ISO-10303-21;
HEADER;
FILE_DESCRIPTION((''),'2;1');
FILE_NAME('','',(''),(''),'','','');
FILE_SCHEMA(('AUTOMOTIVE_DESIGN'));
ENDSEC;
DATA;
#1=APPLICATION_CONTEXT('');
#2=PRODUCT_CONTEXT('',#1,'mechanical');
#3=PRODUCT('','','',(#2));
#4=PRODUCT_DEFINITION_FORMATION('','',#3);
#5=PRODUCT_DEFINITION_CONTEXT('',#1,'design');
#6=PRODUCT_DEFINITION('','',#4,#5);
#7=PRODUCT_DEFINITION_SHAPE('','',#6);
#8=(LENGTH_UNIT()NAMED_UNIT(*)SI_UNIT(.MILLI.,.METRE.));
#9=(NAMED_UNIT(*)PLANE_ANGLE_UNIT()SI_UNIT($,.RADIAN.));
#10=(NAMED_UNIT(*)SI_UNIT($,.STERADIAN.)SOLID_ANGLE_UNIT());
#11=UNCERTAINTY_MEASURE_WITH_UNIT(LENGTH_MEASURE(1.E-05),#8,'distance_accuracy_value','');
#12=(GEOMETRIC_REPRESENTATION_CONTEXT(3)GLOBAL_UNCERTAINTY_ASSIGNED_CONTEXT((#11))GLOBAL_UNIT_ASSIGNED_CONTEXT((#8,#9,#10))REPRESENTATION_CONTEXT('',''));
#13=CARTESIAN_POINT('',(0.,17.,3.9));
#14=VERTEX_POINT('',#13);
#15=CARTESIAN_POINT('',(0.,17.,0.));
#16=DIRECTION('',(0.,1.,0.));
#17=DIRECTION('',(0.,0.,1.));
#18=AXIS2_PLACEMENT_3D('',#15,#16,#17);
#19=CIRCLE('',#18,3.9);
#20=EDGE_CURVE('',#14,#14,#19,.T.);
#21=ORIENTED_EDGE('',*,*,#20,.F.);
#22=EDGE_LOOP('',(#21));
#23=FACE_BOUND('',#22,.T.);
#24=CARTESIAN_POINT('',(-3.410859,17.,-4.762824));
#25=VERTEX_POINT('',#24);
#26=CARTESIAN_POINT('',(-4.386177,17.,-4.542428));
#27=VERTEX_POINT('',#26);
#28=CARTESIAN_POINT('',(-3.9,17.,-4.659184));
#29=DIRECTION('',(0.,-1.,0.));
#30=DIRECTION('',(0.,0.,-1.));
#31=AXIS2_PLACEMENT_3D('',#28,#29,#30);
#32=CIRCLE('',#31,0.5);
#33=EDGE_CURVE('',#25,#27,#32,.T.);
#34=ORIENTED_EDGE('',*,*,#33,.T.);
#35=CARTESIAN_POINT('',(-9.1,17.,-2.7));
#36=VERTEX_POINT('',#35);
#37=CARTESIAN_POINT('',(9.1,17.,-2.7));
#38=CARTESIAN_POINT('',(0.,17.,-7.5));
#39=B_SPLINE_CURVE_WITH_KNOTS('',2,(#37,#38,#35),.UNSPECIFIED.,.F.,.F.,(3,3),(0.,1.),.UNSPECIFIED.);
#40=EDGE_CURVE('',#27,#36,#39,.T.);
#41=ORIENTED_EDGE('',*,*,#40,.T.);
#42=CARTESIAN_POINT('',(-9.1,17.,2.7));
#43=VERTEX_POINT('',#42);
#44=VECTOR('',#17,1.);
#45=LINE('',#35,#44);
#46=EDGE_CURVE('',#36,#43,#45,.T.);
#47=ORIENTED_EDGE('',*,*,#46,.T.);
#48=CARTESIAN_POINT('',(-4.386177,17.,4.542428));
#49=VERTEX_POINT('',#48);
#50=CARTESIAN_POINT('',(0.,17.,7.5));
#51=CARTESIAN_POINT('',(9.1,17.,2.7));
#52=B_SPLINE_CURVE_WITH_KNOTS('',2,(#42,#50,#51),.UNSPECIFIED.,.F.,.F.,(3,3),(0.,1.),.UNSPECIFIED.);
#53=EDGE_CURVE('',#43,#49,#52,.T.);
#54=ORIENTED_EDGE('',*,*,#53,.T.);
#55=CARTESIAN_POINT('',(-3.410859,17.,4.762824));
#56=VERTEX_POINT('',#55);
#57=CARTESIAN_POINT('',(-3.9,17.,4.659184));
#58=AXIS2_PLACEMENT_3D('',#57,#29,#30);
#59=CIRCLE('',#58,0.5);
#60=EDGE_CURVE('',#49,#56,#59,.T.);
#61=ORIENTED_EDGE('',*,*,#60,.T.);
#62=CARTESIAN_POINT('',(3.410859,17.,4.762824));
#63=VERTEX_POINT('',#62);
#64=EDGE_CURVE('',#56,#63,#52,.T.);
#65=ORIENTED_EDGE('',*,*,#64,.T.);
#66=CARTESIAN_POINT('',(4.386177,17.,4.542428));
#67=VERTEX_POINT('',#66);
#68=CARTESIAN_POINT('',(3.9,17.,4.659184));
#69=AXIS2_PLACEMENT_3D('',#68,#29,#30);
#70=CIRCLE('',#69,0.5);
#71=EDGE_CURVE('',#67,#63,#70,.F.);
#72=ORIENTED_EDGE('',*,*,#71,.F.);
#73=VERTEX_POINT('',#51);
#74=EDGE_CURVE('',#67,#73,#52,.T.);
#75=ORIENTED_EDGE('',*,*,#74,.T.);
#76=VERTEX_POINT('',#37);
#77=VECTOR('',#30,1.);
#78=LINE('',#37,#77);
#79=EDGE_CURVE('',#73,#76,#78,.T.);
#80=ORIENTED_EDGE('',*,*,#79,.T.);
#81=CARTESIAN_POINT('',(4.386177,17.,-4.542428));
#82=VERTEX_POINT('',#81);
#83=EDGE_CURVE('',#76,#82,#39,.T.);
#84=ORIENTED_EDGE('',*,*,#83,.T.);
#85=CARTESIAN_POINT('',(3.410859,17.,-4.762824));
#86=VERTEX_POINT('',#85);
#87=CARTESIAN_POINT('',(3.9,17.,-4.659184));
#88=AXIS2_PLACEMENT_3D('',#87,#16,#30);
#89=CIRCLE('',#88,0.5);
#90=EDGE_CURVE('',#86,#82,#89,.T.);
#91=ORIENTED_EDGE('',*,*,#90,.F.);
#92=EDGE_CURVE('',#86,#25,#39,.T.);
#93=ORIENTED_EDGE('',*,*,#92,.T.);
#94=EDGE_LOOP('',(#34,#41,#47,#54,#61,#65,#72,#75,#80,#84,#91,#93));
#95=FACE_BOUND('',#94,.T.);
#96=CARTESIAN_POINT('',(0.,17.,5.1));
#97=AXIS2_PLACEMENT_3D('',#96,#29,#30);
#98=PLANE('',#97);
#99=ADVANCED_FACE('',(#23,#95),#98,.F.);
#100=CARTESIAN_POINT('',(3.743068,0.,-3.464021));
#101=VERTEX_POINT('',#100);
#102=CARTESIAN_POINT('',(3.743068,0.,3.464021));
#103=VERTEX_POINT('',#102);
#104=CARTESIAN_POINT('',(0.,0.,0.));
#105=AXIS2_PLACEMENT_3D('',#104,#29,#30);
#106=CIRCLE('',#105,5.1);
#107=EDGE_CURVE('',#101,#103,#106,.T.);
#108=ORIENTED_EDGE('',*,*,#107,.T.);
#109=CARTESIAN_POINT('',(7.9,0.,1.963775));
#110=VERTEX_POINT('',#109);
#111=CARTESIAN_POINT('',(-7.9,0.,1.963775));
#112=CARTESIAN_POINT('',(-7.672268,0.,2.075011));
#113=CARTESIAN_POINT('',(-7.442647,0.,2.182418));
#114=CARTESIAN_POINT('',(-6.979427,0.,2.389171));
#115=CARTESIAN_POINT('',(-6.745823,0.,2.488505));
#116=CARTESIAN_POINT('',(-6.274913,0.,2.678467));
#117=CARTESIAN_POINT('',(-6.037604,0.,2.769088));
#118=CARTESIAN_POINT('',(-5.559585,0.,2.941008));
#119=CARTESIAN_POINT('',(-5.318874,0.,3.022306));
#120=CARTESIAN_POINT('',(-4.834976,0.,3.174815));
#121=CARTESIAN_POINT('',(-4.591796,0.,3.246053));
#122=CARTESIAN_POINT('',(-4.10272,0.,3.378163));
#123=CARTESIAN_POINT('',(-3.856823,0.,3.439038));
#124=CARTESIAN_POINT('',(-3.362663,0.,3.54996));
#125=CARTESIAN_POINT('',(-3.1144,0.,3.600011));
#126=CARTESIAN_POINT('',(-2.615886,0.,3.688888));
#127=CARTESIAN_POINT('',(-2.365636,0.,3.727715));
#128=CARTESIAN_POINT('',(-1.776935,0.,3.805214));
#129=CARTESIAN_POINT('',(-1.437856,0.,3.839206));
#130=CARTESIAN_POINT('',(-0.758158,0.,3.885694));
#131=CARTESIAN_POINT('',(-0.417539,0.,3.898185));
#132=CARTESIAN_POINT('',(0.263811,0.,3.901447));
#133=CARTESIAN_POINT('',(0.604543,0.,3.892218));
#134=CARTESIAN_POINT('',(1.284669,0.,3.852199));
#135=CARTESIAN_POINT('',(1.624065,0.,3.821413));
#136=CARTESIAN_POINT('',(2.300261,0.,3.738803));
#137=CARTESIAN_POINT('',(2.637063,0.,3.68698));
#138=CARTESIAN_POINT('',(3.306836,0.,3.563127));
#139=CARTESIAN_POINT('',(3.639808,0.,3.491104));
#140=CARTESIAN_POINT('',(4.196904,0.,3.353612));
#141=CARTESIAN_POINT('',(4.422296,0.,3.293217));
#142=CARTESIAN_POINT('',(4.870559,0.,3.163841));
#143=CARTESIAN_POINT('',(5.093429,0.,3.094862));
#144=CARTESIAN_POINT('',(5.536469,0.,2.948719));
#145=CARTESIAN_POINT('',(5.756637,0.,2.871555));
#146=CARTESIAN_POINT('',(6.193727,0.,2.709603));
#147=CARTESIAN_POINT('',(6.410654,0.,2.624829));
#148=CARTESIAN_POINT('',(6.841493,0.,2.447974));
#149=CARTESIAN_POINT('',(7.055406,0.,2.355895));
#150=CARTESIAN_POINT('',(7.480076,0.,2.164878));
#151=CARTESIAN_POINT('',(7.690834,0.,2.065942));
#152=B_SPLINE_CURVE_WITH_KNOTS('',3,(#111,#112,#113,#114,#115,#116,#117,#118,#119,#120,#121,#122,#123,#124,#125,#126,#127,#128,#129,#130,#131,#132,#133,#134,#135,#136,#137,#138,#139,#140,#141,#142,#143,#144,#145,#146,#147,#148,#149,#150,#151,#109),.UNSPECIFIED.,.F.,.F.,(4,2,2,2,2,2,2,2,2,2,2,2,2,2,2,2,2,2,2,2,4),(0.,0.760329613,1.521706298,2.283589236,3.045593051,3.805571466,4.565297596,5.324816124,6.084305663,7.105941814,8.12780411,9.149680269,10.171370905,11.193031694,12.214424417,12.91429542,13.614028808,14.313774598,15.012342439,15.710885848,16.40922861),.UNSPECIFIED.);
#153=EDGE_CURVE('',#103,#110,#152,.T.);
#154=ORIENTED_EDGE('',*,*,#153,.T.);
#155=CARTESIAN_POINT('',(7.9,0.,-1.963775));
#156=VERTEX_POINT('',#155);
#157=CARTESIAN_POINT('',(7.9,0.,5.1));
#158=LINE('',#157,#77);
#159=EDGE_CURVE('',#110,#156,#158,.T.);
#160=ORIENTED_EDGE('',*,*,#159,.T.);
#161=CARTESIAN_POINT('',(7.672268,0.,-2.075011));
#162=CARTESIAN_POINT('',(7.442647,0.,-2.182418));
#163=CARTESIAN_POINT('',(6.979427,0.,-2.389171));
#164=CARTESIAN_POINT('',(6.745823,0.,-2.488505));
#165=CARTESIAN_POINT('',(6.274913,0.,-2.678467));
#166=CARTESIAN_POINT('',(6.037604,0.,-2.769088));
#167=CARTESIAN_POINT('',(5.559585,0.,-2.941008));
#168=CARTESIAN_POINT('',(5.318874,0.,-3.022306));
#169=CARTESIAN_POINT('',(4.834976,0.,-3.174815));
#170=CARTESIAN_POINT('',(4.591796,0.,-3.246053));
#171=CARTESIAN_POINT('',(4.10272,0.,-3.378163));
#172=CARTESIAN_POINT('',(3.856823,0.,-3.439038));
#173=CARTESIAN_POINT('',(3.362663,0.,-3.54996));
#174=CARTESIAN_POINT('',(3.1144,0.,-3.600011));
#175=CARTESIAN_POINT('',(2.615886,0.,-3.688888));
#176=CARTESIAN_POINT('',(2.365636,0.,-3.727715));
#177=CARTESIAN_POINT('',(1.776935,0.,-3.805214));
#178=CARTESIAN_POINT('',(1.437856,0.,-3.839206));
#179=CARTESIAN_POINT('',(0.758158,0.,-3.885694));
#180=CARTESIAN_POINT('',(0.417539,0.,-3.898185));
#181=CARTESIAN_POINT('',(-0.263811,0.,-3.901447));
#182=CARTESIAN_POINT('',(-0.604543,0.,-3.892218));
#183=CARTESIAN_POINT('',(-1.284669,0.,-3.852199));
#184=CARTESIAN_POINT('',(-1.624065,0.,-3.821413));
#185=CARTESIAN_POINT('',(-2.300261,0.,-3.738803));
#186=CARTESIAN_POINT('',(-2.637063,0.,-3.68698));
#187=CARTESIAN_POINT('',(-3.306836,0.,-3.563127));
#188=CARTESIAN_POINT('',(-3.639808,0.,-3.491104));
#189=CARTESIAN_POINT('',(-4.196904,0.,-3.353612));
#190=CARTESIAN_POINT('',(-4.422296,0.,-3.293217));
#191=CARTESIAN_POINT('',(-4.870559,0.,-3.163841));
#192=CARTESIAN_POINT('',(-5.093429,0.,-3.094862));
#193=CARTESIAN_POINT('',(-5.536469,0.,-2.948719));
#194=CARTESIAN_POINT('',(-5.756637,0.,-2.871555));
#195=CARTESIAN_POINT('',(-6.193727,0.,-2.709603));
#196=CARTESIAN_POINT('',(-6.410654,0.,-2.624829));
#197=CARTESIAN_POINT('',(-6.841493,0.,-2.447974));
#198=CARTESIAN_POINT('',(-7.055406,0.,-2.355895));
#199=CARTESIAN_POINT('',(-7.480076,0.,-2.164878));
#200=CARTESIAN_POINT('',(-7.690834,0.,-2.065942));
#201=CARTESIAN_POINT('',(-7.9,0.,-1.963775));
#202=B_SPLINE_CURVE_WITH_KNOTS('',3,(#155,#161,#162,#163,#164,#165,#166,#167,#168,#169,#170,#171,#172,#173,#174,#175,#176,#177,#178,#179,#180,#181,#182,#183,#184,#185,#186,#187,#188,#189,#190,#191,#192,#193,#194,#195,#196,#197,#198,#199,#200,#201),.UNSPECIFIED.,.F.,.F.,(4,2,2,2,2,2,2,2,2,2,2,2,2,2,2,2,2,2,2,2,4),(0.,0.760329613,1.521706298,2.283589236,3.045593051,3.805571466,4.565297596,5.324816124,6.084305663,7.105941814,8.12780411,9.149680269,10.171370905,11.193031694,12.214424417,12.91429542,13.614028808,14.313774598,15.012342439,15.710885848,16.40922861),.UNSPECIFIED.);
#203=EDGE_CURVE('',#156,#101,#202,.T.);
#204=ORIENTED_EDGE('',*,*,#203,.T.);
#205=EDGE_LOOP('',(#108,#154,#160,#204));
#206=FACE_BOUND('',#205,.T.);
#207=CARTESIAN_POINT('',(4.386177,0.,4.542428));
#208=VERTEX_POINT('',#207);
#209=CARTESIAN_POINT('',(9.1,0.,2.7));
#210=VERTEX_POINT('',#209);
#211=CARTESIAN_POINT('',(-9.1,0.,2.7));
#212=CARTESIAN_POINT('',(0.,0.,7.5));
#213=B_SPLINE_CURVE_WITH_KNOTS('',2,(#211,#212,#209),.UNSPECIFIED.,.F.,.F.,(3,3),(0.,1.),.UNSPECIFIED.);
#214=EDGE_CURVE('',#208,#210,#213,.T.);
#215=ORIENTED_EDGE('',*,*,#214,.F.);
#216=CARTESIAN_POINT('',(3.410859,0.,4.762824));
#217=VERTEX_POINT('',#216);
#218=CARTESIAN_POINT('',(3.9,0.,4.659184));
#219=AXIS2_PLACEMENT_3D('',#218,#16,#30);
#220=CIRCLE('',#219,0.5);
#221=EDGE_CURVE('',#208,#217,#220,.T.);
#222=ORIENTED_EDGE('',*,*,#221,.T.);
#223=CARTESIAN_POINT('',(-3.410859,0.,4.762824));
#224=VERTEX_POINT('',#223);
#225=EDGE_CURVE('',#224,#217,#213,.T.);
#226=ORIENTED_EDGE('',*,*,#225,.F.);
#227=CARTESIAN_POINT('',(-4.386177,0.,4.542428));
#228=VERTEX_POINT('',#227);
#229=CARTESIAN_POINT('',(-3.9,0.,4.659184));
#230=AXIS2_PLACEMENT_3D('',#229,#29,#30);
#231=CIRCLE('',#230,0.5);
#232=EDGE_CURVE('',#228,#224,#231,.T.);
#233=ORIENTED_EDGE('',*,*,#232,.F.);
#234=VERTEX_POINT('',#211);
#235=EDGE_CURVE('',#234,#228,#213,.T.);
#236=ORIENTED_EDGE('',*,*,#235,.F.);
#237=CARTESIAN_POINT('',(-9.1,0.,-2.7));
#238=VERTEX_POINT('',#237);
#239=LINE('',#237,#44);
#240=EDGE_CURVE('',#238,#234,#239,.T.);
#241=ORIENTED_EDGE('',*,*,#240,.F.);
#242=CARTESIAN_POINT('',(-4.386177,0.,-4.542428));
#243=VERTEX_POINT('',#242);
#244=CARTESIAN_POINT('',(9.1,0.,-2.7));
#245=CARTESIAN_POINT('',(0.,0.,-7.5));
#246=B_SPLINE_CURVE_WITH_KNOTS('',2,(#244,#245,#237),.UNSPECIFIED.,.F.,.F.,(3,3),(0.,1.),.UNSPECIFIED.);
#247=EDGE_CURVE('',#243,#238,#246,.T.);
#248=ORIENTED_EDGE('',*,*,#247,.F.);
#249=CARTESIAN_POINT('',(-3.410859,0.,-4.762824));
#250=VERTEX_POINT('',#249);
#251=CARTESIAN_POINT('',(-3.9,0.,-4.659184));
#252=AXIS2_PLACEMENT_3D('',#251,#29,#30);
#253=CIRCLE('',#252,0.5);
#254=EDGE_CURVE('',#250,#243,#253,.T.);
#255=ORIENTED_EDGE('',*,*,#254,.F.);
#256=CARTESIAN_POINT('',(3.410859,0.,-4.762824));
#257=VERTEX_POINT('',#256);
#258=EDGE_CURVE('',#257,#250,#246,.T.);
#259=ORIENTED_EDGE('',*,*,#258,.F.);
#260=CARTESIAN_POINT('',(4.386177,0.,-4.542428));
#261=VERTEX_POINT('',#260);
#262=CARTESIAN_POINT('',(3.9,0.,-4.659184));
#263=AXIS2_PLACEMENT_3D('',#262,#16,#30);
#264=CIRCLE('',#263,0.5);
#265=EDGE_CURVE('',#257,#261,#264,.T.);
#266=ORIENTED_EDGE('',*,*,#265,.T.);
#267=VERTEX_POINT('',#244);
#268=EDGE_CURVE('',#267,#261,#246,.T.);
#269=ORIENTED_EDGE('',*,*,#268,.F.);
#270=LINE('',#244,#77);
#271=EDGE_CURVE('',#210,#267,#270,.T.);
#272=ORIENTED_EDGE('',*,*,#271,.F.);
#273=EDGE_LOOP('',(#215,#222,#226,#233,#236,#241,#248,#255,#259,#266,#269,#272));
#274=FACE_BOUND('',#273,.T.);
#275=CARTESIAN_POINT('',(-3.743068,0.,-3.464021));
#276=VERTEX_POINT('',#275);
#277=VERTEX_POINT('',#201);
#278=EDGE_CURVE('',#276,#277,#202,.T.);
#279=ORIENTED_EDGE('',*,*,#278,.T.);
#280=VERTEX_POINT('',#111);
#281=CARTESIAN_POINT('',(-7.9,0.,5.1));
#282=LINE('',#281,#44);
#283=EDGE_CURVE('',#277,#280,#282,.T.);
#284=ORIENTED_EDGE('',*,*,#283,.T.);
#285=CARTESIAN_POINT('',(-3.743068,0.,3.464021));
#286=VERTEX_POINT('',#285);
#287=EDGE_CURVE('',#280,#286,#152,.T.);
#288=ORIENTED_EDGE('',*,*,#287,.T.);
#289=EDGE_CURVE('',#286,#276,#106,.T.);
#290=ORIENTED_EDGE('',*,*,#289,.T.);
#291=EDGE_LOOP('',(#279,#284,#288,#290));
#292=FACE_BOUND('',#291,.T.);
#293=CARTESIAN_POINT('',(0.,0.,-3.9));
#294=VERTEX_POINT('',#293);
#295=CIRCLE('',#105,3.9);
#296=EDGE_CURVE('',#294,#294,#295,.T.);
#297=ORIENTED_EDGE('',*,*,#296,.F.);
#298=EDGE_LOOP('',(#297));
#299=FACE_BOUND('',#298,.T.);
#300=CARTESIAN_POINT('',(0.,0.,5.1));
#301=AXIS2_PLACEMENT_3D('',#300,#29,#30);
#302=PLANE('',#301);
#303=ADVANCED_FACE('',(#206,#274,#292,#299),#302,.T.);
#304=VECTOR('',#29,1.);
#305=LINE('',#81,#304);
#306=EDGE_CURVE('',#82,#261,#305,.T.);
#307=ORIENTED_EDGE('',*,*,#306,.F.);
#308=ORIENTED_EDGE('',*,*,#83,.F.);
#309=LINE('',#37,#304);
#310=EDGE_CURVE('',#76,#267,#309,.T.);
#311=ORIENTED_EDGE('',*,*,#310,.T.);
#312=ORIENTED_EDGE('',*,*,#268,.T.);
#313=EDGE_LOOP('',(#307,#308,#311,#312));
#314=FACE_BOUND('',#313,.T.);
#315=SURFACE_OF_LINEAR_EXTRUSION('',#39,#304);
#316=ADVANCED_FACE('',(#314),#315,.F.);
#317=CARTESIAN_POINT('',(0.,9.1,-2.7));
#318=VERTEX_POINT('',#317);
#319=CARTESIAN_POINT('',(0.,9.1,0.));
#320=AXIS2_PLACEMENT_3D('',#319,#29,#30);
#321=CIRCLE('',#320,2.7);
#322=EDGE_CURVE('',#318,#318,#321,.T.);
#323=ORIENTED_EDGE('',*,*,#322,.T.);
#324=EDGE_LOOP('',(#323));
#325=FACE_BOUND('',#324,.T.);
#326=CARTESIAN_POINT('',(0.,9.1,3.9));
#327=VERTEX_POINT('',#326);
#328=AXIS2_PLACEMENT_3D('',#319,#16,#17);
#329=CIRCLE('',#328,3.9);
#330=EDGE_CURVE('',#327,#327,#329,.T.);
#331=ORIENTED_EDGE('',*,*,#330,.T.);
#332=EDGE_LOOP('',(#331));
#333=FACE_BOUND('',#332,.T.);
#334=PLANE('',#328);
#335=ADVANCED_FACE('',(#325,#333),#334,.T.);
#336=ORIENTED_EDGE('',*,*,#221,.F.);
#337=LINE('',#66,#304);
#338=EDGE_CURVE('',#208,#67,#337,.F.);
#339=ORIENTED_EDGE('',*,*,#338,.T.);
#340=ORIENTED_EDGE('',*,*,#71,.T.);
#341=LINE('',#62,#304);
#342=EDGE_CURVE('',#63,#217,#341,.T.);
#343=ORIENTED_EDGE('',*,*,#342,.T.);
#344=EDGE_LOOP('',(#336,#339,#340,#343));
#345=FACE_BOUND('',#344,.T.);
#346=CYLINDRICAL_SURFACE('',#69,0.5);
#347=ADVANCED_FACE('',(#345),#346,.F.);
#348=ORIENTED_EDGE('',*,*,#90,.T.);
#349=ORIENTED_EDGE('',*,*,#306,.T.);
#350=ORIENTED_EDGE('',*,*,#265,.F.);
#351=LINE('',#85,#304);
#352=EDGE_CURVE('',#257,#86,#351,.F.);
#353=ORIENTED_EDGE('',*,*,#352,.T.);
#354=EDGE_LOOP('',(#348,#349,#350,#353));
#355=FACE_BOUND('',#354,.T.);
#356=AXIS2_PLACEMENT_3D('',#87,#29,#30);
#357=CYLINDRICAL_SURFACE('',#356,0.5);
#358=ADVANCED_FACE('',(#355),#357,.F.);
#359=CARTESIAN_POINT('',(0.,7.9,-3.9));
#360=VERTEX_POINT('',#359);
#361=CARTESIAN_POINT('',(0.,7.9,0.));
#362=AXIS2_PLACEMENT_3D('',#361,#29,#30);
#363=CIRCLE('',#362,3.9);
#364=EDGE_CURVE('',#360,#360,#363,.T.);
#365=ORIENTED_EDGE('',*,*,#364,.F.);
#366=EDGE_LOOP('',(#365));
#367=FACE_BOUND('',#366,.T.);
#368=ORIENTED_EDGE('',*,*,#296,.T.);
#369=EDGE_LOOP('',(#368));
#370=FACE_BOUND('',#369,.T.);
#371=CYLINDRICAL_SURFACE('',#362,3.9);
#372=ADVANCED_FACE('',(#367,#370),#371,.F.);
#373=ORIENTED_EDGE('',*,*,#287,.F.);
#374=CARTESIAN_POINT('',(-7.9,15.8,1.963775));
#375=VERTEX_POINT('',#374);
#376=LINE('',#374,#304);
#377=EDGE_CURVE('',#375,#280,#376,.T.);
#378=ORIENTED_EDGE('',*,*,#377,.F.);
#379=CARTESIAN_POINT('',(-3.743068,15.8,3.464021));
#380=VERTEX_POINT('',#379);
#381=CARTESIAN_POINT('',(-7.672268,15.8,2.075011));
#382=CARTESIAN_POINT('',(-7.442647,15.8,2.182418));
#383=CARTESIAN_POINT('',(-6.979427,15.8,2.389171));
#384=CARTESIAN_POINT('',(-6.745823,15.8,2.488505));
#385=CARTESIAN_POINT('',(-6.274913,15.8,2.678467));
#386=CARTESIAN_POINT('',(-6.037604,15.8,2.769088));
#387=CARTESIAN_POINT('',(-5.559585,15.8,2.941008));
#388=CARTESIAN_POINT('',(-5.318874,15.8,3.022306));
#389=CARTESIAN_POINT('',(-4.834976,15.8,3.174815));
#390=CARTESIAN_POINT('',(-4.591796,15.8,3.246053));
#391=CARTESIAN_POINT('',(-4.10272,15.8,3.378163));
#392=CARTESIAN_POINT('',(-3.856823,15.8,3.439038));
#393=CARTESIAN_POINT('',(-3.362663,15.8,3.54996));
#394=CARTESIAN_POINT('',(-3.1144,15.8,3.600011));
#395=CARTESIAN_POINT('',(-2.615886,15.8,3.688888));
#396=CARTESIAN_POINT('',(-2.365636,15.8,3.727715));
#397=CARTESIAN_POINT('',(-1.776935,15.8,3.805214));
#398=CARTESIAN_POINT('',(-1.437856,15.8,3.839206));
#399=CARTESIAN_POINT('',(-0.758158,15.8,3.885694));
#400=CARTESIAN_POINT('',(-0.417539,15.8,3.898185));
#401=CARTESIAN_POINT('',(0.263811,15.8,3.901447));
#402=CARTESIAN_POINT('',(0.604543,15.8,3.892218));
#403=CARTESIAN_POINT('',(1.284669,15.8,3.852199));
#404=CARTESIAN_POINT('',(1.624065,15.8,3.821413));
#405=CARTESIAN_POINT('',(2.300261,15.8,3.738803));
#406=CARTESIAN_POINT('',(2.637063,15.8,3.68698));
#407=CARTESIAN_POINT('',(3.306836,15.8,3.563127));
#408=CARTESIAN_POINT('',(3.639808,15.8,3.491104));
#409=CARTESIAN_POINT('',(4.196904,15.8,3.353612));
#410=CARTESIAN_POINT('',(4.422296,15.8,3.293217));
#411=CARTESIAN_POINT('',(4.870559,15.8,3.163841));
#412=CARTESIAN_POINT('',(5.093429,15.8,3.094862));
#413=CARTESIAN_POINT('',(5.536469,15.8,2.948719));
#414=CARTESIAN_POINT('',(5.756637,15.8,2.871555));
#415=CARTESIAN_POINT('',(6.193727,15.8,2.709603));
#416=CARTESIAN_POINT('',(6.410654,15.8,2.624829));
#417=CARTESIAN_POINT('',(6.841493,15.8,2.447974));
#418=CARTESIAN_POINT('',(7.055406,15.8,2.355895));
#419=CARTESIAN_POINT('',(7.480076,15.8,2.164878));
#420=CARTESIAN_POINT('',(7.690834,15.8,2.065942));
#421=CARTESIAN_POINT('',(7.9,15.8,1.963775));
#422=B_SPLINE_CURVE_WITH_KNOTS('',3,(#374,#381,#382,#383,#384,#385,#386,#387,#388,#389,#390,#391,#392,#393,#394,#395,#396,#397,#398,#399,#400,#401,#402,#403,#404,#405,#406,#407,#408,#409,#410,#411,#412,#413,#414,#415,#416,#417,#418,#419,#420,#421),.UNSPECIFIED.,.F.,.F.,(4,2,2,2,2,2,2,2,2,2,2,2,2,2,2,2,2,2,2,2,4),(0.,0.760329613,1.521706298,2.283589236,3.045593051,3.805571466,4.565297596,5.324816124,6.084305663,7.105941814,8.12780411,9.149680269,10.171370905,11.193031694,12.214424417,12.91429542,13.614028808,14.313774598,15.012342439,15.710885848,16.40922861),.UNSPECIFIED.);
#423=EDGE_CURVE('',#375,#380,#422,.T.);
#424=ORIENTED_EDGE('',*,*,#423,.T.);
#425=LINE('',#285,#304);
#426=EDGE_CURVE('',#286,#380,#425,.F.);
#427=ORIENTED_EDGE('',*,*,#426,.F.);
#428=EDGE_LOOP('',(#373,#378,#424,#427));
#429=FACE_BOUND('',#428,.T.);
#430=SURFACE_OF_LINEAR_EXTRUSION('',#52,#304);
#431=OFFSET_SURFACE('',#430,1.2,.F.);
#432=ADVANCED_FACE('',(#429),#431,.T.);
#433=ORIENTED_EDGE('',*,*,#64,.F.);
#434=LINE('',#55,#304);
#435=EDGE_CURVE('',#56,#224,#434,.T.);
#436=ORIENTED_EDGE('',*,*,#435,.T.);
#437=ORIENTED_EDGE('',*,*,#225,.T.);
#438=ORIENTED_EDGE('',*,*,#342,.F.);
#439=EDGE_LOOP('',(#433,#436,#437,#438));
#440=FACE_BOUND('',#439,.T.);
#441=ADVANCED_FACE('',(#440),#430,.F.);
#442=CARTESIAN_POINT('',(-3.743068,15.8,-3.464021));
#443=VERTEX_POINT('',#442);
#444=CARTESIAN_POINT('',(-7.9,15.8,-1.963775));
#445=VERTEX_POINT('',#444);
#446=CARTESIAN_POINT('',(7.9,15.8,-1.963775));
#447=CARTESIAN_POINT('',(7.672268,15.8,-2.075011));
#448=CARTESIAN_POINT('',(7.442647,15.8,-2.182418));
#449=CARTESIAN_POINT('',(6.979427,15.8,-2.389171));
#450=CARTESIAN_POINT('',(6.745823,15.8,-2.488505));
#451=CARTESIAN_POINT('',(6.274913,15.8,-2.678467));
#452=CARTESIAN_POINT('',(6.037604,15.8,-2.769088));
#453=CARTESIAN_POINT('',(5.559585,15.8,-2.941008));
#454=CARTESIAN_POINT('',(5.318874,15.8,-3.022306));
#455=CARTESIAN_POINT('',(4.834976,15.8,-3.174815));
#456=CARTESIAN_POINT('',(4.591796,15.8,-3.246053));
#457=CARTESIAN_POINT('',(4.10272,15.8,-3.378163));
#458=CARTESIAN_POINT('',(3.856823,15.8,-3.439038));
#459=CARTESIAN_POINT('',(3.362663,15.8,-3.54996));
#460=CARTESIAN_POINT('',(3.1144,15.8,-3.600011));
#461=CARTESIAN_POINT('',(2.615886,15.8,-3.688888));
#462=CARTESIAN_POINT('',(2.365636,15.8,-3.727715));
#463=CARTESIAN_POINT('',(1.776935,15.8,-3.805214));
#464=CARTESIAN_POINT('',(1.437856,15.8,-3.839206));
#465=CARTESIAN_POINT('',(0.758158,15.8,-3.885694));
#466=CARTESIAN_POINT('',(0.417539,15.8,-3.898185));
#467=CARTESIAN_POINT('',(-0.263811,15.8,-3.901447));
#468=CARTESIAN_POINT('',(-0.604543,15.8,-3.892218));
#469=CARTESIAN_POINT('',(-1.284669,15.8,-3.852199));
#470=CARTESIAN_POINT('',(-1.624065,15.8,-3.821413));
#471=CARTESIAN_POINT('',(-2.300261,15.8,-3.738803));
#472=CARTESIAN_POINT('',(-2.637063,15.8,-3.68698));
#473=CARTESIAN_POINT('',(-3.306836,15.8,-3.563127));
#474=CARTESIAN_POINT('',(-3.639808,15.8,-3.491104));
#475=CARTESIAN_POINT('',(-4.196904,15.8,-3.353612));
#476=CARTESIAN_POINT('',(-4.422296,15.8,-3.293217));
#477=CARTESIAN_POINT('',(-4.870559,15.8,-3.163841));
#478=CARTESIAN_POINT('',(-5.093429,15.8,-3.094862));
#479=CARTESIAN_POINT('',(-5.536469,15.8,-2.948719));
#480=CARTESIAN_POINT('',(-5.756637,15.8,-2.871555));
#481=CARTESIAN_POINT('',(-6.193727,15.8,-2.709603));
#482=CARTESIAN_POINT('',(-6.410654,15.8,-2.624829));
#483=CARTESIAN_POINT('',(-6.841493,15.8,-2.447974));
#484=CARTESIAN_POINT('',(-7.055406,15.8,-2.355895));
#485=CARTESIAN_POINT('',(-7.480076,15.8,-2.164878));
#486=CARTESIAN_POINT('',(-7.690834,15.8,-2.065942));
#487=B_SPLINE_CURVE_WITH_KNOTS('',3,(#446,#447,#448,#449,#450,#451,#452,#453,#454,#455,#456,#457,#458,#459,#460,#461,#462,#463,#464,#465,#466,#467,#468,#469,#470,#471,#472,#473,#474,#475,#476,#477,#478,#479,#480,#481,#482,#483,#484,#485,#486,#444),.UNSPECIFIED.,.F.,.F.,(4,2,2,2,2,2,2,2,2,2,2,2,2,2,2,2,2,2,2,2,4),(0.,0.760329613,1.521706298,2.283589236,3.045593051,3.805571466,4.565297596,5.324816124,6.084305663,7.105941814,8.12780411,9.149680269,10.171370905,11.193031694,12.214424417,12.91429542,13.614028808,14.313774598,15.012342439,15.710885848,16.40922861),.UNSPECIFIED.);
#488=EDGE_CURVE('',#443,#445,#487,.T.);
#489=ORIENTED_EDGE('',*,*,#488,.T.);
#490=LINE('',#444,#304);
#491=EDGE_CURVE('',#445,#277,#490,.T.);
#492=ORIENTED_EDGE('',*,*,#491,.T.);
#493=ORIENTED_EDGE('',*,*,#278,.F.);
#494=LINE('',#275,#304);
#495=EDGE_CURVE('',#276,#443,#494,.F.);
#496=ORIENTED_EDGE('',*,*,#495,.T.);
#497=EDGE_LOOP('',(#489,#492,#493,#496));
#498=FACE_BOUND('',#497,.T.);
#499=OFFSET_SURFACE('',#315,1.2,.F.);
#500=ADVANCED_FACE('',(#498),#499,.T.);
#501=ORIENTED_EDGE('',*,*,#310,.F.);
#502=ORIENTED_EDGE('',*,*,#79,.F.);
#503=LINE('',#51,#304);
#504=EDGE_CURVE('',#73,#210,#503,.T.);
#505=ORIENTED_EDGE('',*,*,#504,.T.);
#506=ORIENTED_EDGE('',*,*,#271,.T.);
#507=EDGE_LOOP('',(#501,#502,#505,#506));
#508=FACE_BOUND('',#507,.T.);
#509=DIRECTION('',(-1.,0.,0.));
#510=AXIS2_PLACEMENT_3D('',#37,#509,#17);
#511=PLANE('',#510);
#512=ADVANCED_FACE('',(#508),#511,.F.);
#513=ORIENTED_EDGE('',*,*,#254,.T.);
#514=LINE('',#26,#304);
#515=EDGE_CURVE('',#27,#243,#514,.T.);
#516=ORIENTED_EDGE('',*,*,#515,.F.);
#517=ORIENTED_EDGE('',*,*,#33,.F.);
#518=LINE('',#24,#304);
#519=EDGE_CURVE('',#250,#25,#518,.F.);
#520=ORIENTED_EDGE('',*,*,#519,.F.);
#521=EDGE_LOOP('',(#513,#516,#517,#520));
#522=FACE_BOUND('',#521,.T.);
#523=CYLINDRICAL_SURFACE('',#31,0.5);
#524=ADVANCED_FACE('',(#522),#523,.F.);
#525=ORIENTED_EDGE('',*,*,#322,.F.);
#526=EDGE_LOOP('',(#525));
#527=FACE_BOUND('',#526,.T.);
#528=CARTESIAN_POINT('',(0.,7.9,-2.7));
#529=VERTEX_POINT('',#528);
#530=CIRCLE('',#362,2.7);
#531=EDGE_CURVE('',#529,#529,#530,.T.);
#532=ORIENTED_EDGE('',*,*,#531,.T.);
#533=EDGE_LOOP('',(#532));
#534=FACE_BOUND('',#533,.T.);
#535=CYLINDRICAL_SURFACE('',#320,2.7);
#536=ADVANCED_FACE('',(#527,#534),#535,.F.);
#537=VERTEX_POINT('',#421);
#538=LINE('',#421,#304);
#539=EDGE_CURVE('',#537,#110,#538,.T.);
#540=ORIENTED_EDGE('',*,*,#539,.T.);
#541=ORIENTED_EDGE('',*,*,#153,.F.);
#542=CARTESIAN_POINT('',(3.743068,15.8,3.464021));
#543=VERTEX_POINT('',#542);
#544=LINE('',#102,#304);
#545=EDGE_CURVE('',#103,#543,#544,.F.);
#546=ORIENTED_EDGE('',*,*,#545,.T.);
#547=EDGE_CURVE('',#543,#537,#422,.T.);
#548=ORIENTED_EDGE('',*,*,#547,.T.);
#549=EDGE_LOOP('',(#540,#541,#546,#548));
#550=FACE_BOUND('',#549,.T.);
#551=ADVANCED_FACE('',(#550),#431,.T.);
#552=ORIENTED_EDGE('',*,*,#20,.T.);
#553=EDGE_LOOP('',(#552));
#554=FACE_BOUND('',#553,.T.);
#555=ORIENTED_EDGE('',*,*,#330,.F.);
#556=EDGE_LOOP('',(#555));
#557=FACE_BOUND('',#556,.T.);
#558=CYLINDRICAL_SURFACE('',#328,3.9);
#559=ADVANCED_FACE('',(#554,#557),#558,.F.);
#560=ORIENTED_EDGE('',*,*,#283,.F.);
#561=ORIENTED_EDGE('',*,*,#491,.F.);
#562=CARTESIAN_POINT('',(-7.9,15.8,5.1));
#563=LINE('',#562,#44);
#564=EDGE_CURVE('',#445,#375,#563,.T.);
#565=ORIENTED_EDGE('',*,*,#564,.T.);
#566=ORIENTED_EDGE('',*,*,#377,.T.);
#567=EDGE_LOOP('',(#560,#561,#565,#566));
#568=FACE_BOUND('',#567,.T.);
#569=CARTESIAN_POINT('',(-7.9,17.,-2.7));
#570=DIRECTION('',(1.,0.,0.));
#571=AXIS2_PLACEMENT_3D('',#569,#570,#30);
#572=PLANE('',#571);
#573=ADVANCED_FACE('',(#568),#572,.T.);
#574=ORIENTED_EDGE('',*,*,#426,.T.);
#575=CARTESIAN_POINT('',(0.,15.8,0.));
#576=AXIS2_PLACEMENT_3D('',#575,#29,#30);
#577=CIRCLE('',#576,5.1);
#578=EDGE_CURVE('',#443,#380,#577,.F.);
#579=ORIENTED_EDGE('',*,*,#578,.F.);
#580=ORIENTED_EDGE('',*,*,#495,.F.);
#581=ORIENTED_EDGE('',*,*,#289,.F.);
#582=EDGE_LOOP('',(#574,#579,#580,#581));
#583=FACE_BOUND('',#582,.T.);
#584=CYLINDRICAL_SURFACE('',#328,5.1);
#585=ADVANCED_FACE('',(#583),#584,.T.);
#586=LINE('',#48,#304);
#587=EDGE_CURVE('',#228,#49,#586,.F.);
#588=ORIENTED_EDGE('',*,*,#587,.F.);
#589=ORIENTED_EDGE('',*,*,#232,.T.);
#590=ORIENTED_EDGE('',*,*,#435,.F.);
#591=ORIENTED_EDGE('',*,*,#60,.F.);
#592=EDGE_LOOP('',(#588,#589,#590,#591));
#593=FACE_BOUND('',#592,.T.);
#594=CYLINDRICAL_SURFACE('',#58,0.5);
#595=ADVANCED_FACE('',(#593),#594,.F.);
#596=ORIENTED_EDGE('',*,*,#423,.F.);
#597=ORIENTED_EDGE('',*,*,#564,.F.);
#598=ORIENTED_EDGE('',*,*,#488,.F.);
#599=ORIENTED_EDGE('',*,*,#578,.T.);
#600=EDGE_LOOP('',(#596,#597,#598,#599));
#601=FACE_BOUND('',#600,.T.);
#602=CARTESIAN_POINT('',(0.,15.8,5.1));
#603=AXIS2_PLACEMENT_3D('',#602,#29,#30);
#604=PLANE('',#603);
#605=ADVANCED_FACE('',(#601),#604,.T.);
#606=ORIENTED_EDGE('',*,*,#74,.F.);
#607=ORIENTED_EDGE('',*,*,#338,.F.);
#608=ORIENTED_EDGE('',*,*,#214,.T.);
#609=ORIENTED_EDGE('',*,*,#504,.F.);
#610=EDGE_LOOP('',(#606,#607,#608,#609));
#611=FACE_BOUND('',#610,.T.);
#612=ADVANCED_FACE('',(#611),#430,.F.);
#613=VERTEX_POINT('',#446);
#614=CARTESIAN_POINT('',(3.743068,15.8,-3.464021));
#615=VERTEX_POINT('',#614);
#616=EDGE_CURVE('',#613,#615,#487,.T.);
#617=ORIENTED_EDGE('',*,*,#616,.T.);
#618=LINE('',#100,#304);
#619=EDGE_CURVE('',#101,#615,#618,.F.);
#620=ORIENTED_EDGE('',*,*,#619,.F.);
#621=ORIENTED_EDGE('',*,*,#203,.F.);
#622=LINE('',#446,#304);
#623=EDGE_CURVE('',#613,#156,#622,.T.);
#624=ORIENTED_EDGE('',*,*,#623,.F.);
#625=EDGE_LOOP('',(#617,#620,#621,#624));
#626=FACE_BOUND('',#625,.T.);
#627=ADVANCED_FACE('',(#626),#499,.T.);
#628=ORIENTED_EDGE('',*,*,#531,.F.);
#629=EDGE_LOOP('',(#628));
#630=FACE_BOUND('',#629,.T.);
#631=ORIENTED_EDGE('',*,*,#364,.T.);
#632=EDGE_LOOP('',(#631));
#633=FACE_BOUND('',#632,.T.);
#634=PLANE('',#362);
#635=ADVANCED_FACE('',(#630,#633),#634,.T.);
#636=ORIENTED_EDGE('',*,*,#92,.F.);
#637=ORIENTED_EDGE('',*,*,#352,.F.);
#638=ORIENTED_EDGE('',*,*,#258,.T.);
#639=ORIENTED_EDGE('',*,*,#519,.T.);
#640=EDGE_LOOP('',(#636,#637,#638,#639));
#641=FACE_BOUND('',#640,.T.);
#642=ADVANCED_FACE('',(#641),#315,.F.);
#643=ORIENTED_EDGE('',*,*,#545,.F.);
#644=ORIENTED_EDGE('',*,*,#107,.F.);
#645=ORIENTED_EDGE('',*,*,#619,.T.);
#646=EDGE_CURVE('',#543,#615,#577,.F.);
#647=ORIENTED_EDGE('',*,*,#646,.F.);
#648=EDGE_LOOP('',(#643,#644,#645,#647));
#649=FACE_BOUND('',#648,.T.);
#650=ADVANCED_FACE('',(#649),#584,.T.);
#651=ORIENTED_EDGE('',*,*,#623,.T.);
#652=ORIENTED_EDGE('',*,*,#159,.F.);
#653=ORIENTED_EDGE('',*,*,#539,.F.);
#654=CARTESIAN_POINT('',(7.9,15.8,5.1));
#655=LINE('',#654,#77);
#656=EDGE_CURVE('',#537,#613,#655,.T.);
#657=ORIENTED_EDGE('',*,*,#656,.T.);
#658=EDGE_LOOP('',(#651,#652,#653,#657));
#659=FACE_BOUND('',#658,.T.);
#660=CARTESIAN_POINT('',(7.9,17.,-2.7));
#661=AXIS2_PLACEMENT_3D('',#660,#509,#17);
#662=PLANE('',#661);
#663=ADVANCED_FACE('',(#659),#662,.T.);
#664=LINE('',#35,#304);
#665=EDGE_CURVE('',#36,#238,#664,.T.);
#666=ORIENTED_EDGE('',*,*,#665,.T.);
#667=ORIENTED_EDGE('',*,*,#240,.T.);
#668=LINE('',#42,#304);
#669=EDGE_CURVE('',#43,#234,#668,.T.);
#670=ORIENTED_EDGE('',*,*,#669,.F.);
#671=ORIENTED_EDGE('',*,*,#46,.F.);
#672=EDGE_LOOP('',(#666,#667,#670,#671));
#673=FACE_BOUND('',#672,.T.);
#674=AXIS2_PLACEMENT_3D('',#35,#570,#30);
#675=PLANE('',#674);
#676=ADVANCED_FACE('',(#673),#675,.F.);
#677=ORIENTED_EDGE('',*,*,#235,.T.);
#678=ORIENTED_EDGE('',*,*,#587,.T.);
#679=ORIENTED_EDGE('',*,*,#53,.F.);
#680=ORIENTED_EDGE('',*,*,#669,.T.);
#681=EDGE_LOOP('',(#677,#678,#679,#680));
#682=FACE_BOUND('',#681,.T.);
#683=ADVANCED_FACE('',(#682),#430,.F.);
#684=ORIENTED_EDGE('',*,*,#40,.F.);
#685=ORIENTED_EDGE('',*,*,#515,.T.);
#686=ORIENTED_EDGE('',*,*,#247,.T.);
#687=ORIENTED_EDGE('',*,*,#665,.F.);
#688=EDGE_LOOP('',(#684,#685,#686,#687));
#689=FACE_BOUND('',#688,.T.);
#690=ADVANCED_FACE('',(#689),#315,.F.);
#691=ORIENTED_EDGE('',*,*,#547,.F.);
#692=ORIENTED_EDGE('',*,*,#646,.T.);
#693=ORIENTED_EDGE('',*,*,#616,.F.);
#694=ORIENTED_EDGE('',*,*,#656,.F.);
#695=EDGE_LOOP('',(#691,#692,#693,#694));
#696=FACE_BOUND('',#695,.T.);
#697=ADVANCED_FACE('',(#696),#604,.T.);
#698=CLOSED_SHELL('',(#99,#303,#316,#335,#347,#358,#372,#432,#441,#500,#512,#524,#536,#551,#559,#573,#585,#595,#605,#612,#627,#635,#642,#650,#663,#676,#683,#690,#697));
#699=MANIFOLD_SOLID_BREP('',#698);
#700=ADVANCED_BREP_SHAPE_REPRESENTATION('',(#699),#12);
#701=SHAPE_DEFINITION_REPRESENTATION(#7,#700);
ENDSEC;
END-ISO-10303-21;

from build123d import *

# Parameters (mm, degrees)
BOSS_EXTRUDE1_DEPTH = 17
SKETCH2_R           = 3.9
CUT_EXTRUDE1_DEPTH  = 7.9
CUT_EXTRUDE2_START  = -7.9
SKETCH3_R           = 3.9
CUT_EXTRUDE2_DEPTH  = 7.9
SKETCH4_R           = 2.7
CUT_EXTRUDE3_DEPTH  = 1.2
SHELL1_DEPTH        = 15.8
SKETCH8_R           = 0.5
CUT_EXTRUDE4_DEPTH  = 17


# Read off the part's stored shape, not the designer's step: Shell1
with BuildPart() as part:
    # Sketch1 → Boss-Extrude1 (new body)
    with BuildSketch(Plane(origin=(0, 0, 0), x_dir=(1, 0, 0), z_dir=(0, 1, 0))):
        with BuildLine():
            Line((-9.1, 2.7), (-9.1, -2.7))
            add(Edge.make_bspline(
                [(-9.1, -2.7), (0, -7.5), (9.1, -2.7)],
                knots=[0, 0, 0, 1, 1, 1], degree=2))
            Line((9.1, -2.7), (9.1, 2.7))
            add(Edge.make_bspline(
                [(-9.1, 2.7), (0, 7.5), (9.1, 2.7)],
                knots=[0, 0, 0, 1, 1, 1], degree=2))
        make_face()
    extrude(amount=BOSS_EXTRUDE1_DEPTH)

    # Sketch2 → Cut-Extrude1 (cut)
    with BuildSketch(Plane(origin=(0, 17, 0), x_dir=(1, 0, 0), z_dir=(0, 1, 0))):
        with Locations(Location((0, 0, 0), (0, 0, 270))):
            Circle(SKETCH2_R)
    extrude(amount=-CUT_EXTRUDE1_DEPTH, mode=Mode.SUBTRACT)

    # Sketch3 → Cut-Extrude2 (cut)
    with BuildSketch(Plane(origin=(0, 0, 0), x_dir=(-1, 0, 0), z_dir=(0, -1, 0)).offset(CUT_EXTRUDE2_START)):
        with Locations(Location((0, 0, 0), (0, 0, 270))):
            Circle(SKETCH3_R)
    extrude(amount=CUT_EXTRUDE2_DEPTH, mode=Mode.SUBTRACT)

    # Sketch4 → Cut-Extrude3 (cut)
    with BuildSketch(Plane.XZ.offset(-7.9)):
        with Locations(Location((0, 0, 0), (0, 0, 270))):
            Circle(SKETCH4_R)
    extrude(amount=-CUT_EXTRUDE3_DEPTH, mode=Mode.SUBTRACT)

    # Shell1 outline → Shell1 (cut)
    with BuildSketch(Plane(origin=(0, 0, 0), x_dir=(1, 0, 0), z_dir=(0, 1, 0))):
        with BuildLine():
            Line((-7.899999781, 1.963775482), (-7.899999781, -1.963775482))
            add(Edge.make_bspline(
                [(-7.899999781, -1.963775482), (-7.481101996, -2.168383254), (-7.062952664, -2.360723495), (-6.645550136, -2.540844903), (-6.228886411, -2.708799004), (-5.812947019, -2.864639229), (-5.397710236, -3.008420202), (-4.983146308, -3.140196716), (-4.569217021, -3.260022384), (-4.155875768, -3.367948145), (-3.7430681, -3.46402079)],
                knots=[0.036996465, 0.036996465, 0.036996465, 0.036996465, 0.036996465, 0.036996465, 0.036996465, 0.036996465, 0.036996465, 0.036996465, 0.036996465, 0.279391491, 0.279391491, 0.279391491, 0.279391491, 0.279391491, 0.279391491, 0.279391491, 0.279391491, 0.279391491, 0.279391491, 0.279391491], degree=10))
            ThreePointArc((-3.7430681, -3.46402079), (-5.1, 0), (-3.74306828, 3.464020764))
            add(Edge.make_bspline(
                [(-3.74306828, 3.464020764), (-4.155875768, 3.367948145), (-4.569217021, 3.260022384), (-4.983146308, 3.140196716), (-5.397710236, 3.008420202), (-5.812947019, 2.864639229), (-6.228886411, 2.708799004), (-6.645550136, 2.540844903), (-7.062952664, 2.360723495), (-7.481101996, 2.168383254), (-7.899999781, 1.963775482)],
                knots=[0.720608509, 0.720608509, 0.720608509, 0.720608509, 0.720608509, 0.720608509, 0.720608509, 0.720608509, 0.720608509, 0.720608509, 0.720608509, 0.963003535, 0.963003535, 0.963003535, 0.963003535, 0.963003535, 0.963003535, 0.963003535, 0.963003535, 0.963003535, 0.963003535, 0.963003535], degree=10))
        make_face()
        with BuildLine():
            ThreePointArc((3.74306828, 3.464020764), (5.1, 0), (3.74306828, -3.464020764))
            add(Edge.make_bspline(
                [(3.74306828, -3.464020764), (4.155875768, -3.367948145), (4.569217021, -3.260022384), (4.983146308, -3.140196716), (5.397710236, -3.008420202), (5.812947019, -2.864639229), (6.228886411, -2.708799004), (6.645550136, -2.540844903), (7.062952664, -2.360723495), (7.481101996, -2.168383254), (7.899999781, -1.963775482)],
                knots=[0.720608509, 0.720608509, 0.720608509, 0.720608509, 0.720608509, 0.720608509, 0.720608509, 0.720608509, 0.720608509, 0.720608509, 0.720608509, 0.963003535, 0.963003535, 0.963003535, 0.963003535, 0.963003535, 0.963003535, 0.963003535, 0.963003535, 0.963003535, 0.963003535, 0.963003535], degree=10))
            Line((7.899999781, -1.963775482), (7.899999781, 1.963775482))
            add(Edge.make_bspline(
                [(7.899999781, 1.963775482), (7.481101996, 2.168383254), (7.062952664, 2.360723495), (6.645550136, 2.540844903), (6.228886411, 2.708799004), (5.812947019, 2.864639229), (5.397710236, 3.008420202), (4.983146308, 3.140196716), (4.569217021, 3.260022384), (4.155875768, 3.367948145), (3.74306828, 3.464020764)],
                knots=[0.036996465, 0.036996465, 0.036996465, 0.036996465, 0.036996465, 0.036996465, 0.036996465, 0.036996465, 0.036996465, 0.036996465, 0.036996465, 0.279391491, 0.279391491, 0.279391491, 0.279391491, 0.279391491, 0.279391491, 0.279391491, 0.279391491, 0.279391491, 0.279391491, 0.279391491], degree=10))
        make_face()
    extrude(amount=SHELL1_DEPTH, mode=Mode.SUBTRACT)

    # Sketch8 → Cut-Extrude4 (cut)
    with BuildSketch(Plane.XZ):
        with Locations((-3.9, 4.659183673)):
            Circle(SKETCH8_R)
        with Locations((-3.9, -4.659183673)):
            Circle(SKETCH8_R)
    cut_extrude4 = extrude(amount=-CUT_EXTRUDE4_DEPTH, mode=Mode.SUBTRACT)

    # Mirror1: Cut-Extrude4 across plane
    add(cut_extrude4.mirror(Plane(origin=(0, 0, 0), x_dir=(0, 0, 1), z_dir=(1, 0, 0))), mode=Mode.SUBTRACT)


solid = part.part
